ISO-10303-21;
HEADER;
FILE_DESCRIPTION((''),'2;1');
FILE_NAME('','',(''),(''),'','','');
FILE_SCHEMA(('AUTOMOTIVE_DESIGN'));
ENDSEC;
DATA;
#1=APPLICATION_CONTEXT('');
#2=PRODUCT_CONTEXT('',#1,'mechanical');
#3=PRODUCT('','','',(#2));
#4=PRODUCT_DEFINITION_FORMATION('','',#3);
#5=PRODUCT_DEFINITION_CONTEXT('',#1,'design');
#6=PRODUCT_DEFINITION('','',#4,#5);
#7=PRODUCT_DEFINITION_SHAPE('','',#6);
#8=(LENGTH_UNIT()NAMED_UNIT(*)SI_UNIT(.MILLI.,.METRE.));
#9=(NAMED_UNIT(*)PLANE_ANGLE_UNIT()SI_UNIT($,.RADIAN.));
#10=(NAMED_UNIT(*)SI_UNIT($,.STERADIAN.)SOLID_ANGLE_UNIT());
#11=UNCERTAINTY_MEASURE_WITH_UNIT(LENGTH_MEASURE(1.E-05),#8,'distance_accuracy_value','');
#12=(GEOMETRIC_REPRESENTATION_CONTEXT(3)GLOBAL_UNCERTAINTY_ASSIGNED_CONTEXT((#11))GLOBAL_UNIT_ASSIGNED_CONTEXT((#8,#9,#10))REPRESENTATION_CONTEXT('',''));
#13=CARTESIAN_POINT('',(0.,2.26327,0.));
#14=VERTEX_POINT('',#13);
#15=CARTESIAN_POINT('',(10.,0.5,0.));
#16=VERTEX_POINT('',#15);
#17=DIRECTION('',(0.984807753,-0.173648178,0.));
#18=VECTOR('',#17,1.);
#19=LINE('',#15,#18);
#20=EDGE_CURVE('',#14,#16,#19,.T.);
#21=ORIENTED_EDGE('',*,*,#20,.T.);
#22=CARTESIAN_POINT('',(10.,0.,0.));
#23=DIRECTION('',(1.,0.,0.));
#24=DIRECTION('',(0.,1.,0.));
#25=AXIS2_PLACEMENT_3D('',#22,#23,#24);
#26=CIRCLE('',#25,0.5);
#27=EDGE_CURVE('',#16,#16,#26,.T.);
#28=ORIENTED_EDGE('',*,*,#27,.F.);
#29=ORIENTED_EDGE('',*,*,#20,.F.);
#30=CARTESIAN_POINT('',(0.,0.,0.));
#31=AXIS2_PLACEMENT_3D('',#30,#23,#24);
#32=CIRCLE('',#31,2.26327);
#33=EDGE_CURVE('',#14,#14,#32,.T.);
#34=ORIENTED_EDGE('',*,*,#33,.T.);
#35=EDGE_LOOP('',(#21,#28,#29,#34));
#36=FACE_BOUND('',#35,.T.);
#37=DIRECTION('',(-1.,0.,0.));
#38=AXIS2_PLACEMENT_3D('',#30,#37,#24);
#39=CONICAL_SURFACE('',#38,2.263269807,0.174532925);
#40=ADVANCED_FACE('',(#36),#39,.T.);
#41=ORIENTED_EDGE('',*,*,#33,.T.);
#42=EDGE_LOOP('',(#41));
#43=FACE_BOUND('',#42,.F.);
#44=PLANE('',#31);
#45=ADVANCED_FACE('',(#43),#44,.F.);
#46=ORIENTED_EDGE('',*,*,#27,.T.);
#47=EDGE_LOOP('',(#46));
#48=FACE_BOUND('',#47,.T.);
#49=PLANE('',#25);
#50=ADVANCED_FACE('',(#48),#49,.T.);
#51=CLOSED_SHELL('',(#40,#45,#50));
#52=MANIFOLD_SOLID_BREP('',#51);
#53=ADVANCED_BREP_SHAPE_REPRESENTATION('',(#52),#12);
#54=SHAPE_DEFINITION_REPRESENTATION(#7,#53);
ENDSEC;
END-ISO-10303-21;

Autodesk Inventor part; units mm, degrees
ref_plane "YZ Plane" through (0, 0, 0) normal (1, 0, 0) x (0, 1, 0)
ref_plane "XZ Plane" through (0, 0, 0) normal (0, 1, 0) x (-1, 0, 0)
ref_plane "XY Plane" through (0, 0, 0) normal (0, 0, 1) x (1, 0, 0)
sketch "Sketch1" plane through (0, 0, 0) normal (1, 0, 0) x (0, 1, 0)
  circle A0 centre (0, 0) radius 0.5
  dimension "d0" = 1
extrude "Extrusion1" add sketch "Sketch1" along normal blind 10
draft "FaceDraft1" angle 10 pull direction (1, 0, 0) faces at (6.6667, 0.4935, -0.0802) fixed edges at (10, -0.5, 0)
sketch "Sketch2" plane through (0, 0, 0) normal (-1, 0, 0) x (0, 0, 1)
  point P0 (0, 0)
properties part number "bout stylo"
